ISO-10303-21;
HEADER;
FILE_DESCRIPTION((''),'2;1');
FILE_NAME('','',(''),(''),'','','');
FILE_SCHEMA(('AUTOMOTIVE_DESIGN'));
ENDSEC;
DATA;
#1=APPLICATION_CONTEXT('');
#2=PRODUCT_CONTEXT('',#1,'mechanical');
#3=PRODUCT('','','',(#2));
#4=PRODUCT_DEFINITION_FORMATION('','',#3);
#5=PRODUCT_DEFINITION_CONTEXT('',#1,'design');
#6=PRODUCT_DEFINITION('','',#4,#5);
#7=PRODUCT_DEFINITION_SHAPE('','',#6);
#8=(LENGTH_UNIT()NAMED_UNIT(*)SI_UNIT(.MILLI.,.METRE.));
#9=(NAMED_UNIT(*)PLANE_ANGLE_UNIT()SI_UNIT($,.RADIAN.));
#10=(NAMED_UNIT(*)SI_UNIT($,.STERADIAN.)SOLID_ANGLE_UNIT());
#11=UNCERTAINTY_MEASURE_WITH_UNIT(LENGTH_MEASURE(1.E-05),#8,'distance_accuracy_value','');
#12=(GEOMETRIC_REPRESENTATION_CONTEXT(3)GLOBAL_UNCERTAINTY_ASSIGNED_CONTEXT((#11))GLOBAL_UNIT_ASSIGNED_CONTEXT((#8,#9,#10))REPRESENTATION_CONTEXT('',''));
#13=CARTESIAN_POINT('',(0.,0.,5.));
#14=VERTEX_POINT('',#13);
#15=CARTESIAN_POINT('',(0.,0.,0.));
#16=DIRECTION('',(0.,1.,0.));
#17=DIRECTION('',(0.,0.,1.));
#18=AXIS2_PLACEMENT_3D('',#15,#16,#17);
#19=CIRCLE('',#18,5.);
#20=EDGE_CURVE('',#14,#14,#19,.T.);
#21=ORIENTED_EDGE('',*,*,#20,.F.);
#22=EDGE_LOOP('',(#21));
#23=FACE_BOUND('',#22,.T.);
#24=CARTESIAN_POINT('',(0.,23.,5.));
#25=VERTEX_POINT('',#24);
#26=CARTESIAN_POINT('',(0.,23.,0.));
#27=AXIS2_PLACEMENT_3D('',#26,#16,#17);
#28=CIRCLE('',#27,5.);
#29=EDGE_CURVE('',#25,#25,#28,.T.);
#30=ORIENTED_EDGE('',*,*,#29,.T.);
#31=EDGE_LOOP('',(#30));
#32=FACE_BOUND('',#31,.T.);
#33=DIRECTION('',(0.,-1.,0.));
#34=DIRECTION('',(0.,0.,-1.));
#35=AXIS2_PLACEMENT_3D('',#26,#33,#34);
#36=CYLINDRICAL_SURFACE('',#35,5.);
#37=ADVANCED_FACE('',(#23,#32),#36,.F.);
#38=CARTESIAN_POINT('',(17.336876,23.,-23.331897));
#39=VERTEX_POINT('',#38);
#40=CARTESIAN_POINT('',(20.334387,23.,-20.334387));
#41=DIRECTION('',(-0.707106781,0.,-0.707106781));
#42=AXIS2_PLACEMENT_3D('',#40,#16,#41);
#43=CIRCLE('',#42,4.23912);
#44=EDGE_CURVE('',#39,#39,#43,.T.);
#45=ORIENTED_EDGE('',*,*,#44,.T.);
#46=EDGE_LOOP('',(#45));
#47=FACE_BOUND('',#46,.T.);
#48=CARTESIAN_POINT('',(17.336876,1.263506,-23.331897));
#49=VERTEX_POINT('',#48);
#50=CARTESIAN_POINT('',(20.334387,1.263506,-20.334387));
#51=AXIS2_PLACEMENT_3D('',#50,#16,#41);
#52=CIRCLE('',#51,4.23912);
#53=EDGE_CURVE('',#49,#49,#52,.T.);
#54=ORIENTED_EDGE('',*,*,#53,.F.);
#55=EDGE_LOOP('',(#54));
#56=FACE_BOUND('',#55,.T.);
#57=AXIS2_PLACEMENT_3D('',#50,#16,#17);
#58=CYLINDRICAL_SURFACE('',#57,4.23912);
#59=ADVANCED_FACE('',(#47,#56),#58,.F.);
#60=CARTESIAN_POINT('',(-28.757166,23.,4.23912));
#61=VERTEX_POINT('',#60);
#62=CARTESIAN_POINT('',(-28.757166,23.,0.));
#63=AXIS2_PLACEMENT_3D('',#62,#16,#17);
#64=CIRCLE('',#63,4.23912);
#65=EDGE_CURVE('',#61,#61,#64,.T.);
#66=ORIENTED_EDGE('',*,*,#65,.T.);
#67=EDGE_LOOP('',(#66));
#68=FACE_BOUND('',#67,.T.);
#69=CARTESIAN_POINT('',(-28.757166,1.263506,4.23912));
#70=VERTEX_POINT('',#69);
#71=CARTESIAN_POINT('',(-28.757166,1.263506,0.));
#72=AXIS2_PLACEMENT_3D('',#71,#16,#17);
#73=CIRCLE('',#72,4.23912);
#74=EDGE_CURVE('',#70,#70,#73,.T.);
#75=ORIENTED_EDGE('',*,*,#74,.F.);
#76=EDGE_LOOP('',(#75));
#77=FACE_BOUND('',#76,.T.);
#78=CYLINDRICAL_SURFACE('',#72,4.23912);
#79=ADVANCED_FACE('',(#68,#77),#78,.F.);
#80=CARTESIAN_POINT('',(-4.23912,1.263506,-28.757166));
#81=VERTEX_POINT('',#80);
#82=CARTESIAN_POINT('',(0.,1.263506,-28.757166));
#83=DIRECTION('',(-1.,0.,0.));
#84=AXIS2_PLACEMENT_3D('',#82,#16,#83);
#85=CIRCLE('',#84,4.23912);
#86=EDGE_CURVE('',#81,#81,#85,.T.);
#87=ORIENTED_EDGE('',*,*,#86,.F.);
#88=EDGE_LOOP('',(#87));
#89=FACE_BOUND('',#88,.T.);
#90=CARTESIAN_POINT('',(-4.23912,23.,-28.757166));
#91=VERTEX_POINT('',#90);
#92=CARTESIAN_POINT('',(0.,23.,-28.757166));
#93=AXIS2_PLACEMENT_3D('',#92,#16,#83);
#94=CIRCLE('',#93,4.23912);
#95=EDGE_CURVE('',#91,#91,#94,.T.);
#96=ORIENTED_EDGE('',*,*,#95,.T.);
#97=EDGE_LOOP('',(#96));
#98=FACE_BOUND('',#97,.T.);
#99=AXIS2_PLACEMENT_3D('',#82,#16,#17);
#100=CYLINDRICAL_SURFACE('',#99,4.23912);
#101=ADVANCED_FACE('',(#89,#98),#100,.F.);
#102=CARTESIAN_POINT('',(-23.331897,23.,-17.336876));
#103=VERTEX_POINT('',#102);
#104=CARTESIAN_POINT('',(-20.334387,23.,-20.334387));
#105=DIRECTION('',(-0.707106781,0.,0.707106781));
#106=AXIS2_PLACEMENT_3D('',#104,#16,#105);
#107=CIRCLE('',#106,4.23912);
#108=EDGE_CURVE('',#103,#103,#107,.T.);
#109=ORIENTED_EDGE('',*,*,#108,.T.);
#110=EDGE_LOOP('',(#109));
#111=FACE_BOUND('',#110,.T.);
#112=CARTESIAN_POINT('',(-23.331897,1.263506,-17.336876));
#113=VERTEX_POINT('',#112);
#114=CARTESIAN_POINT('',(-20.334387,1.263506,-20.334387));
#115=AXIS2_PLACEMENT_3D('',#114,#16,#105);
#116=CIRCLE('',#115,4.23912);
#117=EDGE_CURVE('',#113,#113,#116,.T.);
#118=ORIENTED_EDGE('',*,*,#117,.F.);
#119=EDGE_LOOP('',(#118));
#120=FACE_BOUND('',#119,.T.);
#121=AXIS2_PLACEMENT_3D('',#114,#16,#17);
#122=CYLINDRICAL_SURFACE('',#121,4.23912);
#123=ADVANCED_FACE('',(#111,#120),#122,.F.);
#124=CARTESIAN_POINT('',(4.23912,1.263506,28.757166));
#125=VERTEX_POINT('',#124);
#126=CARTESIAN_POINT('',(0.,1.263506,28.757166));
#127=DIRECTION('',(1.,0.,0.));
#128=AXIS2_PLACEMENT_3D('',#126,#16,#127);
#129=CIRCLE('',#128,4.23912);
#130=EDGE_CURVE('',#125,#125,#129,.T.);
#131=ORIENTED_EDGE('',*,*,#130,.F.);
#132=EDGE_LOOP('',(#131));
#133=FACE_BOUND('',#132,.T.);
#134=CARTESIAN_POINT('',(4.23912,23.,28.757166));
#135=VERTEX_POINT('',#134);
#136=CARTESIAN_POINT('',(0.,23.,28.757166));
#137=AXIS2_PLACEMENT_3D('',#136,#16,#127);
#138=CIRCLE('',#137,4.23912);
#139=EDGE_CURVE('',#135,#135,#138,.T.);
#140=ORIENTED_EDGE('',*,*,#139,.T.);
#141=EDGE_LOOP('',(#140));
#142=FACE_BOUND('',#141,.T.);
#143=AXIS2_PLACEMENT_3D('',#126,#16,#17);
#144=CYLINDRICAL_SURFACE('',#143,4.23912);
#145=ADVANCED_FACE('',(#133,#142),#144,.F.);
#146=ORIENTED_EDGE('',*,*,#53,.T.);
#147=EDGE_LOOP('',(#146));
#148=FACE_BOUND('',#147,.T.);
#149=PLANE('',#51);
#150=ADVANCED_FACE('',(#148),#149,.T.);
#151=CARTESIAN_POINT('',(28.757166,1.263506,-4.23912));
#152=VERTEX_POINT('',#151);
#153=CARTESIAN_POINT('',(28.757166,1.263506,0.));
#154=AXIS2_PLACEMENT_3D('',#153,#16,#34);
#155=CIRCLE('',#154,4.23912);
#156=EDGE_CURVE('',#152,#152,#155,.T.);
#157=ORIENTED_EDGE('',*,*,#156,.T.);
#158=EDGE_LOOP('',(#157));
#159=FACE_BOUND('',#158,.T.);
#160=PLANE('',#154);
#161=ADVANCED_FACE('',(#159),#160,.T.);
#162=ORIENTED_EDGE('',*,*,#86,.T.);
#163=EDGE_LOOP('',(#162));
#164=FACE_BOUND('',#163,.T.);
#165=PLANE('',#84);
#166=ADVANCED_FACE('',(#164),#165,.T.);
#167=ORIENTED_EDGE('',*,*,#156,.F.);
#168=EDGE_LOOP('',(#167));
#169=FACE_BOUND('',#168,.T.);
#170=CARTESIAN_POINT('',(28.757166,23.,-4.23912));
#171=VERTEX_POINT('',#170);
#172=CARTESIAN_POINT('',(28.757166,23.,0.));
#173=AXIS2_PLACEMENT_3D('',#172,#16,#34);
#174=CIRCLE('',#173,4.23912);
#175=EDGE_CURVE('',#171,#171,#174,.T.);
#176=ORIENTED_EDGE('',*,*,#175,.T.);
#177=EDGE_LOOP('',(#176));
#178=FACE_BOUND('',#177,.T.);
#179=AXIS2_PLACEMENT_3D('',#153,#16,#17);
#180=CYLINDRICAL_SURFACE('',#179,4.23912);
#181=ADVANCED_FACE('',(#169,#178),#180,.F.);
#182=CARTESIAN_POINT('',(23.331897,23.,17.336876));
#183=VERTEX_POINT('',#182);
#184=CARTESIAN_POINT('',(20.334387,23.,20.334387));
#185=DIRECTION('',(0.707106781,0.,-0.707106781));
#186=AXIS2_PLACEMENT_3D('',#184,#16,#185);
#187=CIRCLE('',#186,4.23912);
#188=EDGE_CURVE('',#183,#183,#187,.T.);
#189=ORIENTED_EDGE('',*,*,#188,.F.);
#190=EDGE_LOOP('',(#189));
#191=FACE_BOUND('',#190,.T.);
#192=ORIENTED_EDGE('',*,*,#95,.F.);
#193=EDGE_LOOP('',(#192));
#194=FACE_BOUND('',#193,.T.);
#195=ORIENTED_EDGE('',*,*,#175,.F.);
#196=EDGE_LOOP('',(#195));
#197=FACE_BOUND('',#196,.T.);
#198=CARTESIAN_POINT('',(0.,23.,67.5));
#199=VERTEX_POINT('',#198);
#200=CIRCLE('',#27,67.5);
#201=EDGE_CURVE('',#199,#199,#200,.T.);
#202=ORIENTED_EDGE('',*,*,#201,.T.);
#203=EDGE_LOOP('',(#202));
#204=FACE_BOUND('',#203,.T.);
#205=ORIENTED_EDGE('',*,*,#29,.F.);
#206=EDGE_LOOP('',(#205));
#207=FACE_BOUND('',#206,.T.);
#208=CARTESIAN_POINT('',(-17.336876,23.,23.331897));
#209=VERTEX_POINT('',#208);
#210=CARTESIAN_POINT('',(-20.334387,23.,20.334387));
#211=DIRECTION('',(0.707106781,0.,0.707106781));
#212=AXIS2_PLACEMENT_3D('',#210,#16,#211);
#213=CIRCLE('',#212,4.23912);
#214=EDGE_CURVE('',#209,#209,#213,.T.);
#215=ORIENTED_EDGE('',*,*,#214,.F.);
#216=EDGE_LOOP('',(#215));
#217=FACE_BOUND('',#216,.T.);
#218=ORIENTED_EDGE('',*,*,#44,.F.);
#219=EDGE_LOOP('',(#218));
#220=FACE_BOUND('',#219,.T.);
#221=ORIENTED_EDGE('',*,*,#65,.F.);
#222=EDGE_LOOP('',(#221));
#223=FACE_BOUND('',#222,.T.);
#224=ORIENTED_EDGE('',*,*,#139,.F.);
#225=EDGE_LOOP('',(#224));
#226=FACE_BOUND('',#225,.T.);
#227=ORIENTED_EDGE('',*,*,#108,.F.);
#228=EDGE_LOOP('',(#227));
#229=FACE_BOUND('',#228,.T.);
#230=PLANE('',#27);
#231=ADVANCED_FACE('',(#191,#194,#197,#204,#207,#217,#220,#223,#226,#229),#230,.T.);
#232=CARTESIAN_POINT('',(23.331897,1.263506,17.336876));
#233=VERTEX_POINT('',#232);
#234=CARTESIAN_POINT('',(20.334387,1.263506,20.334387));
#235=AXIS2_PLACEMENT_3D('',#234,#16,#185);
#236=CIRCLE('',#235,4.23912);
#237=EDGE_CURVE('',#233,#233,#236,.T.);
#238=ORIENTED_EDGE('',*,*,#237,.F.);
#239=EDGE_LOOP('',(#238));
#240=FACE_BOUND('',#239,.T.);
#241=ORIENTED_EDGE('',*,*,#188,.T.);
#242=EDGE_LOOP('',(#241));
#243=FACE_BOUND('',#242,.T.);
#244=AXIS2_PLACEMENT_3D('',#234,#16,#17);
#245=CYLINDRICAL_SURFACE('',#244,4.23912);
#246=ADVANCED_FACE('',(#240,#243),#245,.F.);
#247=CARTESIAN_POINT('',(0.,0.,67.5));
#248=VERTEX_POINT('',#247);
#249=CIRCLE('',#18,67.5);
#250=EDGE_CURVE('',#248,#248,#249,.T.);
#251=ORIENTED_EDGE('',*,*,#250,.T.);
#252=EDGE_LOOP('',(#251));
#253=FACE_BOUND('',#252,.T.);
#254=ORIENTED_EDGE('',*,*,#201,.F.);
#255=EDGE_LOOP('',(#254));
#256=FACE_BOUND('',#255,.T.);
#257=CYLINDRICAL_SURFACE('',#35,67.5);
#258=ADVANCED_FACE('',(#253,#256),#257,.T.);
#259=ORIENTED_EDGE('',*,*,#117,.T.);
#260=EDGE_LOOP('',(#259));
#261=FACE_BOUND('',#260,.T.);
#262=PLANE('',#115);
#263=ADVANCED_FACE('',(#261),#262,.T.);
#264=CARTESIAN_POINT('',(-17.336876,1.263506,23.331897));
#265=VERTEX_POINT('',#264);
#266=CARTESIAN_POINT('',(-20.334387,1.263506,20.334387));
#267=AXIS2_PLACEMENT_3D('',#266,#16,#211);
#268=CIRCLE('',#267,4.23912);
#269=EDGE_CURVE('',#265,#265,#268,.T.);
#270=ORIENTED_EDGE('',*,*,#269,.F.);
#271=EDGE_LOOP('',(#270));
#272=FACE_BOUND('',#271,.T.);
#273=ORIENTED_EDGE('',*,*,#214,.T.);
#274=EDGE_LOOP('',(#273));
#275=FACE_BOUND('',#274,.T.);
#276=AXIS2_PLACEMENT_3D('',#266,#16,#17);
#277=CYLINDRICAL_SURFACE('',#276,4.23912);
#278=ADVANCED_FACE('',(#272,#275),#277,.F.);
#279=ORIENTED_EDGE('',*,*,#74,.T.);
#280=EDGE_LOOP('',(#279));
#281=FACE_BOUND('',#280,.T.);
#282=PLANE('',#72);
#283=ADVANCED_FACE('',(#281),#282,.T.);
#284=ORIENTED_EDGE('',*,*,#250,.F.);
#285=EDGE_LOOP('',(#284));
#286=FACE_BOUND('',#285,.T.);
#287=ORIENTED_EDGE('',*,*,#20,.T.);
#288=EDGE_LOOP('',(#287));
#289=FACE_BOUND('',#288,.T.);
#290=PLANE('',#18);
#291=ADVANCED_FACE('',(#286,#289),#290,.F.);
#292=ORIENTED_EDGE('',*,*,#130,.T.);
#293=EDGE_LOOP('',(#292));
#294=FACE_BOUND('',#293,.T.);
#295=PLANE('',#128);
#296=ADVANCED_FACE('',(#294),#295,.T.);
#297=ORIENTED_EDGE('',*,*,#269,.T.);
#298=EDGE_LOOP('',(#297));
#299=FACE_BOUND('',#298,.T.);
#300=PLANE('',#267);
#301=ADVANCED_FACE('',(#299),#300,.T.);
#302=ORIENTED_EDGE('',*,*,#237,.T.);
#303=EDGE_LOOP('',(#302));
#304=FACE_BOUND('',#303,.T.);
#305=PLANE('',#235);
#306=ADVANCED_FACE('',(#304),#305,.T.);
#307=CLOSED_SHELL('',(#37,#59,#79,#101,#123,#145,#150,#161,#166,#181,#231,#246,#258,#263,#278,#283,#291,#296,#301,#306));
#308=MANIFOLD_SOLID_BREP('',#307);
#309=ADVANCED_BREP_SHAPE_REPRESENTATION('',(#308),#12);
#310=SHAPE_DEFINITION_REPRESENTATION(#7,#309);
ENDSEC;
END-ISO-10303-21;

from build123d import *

# Parameters (mm, degrees)
SKETCH1_R           = 67.5
BOSS_EXTRUDE1_DEPTH = 23
SKETCH2_R           = 5
CUT_EXTRUDE1_DEPTH  = 99.19114013
SKETCH3_R           = 4.239120244
CUT_EXTRUDE2_DEPTH  = 21.736494387
CIRPATTERN1_COUNT   = 8


with BuildPart() as part:
    # Sketch1 → Boss-Extrude1 (new body)
    with BuildSketch(Plane(origin=(0, 0, 0), x_dir=(1, 0, 0), z_dir=(0, 1, 0))):
        Circle(SKETCH1_R)
    extrude(amount=BOSS_EXTRUDE1_DEPTH)

    # Sketch2 → Cut-Extrude1 (cut, through all)
    with BuildSketch(Plane(origin=(0, 0, 0), x_dir=(1, 0, 0), z_dir=(0, 1, 0))):
        Circle(SKETCH2_R)
    extrude(amount=CUT_EXTRUDE1_DEPTH, mode=Mode.SUBTRACT)

    # Sketch3 → Cut-Extrude2 (cut)
    with BuildSketch(Plane(origin=(0, 23, 0), x_dir=(1, 0, 0), z_dir=(0, 1, 0))):
        with Locations((-28.757165628, 0)):
            Circle(SKETCH3_R)
    cut_extrude2 = extrude(amount=-CUT_EXTRUDE2_DEPTH, mode=Mode.SUBTRACT)

    # CirPattern1: Cut-Extrude2 ×8 about axis
    cirpattern1_axis = Axis((0, 0, 0), (0, 1, 0))
    for i in range(1, CIRPATTERN1_COUNT):
        add(cut_extrude2.rotate(cirpattern1_axis, i * 360 / CIRPATTERN1_COUNT), mode=Mode.SUBTRACT)


solid = part.part
